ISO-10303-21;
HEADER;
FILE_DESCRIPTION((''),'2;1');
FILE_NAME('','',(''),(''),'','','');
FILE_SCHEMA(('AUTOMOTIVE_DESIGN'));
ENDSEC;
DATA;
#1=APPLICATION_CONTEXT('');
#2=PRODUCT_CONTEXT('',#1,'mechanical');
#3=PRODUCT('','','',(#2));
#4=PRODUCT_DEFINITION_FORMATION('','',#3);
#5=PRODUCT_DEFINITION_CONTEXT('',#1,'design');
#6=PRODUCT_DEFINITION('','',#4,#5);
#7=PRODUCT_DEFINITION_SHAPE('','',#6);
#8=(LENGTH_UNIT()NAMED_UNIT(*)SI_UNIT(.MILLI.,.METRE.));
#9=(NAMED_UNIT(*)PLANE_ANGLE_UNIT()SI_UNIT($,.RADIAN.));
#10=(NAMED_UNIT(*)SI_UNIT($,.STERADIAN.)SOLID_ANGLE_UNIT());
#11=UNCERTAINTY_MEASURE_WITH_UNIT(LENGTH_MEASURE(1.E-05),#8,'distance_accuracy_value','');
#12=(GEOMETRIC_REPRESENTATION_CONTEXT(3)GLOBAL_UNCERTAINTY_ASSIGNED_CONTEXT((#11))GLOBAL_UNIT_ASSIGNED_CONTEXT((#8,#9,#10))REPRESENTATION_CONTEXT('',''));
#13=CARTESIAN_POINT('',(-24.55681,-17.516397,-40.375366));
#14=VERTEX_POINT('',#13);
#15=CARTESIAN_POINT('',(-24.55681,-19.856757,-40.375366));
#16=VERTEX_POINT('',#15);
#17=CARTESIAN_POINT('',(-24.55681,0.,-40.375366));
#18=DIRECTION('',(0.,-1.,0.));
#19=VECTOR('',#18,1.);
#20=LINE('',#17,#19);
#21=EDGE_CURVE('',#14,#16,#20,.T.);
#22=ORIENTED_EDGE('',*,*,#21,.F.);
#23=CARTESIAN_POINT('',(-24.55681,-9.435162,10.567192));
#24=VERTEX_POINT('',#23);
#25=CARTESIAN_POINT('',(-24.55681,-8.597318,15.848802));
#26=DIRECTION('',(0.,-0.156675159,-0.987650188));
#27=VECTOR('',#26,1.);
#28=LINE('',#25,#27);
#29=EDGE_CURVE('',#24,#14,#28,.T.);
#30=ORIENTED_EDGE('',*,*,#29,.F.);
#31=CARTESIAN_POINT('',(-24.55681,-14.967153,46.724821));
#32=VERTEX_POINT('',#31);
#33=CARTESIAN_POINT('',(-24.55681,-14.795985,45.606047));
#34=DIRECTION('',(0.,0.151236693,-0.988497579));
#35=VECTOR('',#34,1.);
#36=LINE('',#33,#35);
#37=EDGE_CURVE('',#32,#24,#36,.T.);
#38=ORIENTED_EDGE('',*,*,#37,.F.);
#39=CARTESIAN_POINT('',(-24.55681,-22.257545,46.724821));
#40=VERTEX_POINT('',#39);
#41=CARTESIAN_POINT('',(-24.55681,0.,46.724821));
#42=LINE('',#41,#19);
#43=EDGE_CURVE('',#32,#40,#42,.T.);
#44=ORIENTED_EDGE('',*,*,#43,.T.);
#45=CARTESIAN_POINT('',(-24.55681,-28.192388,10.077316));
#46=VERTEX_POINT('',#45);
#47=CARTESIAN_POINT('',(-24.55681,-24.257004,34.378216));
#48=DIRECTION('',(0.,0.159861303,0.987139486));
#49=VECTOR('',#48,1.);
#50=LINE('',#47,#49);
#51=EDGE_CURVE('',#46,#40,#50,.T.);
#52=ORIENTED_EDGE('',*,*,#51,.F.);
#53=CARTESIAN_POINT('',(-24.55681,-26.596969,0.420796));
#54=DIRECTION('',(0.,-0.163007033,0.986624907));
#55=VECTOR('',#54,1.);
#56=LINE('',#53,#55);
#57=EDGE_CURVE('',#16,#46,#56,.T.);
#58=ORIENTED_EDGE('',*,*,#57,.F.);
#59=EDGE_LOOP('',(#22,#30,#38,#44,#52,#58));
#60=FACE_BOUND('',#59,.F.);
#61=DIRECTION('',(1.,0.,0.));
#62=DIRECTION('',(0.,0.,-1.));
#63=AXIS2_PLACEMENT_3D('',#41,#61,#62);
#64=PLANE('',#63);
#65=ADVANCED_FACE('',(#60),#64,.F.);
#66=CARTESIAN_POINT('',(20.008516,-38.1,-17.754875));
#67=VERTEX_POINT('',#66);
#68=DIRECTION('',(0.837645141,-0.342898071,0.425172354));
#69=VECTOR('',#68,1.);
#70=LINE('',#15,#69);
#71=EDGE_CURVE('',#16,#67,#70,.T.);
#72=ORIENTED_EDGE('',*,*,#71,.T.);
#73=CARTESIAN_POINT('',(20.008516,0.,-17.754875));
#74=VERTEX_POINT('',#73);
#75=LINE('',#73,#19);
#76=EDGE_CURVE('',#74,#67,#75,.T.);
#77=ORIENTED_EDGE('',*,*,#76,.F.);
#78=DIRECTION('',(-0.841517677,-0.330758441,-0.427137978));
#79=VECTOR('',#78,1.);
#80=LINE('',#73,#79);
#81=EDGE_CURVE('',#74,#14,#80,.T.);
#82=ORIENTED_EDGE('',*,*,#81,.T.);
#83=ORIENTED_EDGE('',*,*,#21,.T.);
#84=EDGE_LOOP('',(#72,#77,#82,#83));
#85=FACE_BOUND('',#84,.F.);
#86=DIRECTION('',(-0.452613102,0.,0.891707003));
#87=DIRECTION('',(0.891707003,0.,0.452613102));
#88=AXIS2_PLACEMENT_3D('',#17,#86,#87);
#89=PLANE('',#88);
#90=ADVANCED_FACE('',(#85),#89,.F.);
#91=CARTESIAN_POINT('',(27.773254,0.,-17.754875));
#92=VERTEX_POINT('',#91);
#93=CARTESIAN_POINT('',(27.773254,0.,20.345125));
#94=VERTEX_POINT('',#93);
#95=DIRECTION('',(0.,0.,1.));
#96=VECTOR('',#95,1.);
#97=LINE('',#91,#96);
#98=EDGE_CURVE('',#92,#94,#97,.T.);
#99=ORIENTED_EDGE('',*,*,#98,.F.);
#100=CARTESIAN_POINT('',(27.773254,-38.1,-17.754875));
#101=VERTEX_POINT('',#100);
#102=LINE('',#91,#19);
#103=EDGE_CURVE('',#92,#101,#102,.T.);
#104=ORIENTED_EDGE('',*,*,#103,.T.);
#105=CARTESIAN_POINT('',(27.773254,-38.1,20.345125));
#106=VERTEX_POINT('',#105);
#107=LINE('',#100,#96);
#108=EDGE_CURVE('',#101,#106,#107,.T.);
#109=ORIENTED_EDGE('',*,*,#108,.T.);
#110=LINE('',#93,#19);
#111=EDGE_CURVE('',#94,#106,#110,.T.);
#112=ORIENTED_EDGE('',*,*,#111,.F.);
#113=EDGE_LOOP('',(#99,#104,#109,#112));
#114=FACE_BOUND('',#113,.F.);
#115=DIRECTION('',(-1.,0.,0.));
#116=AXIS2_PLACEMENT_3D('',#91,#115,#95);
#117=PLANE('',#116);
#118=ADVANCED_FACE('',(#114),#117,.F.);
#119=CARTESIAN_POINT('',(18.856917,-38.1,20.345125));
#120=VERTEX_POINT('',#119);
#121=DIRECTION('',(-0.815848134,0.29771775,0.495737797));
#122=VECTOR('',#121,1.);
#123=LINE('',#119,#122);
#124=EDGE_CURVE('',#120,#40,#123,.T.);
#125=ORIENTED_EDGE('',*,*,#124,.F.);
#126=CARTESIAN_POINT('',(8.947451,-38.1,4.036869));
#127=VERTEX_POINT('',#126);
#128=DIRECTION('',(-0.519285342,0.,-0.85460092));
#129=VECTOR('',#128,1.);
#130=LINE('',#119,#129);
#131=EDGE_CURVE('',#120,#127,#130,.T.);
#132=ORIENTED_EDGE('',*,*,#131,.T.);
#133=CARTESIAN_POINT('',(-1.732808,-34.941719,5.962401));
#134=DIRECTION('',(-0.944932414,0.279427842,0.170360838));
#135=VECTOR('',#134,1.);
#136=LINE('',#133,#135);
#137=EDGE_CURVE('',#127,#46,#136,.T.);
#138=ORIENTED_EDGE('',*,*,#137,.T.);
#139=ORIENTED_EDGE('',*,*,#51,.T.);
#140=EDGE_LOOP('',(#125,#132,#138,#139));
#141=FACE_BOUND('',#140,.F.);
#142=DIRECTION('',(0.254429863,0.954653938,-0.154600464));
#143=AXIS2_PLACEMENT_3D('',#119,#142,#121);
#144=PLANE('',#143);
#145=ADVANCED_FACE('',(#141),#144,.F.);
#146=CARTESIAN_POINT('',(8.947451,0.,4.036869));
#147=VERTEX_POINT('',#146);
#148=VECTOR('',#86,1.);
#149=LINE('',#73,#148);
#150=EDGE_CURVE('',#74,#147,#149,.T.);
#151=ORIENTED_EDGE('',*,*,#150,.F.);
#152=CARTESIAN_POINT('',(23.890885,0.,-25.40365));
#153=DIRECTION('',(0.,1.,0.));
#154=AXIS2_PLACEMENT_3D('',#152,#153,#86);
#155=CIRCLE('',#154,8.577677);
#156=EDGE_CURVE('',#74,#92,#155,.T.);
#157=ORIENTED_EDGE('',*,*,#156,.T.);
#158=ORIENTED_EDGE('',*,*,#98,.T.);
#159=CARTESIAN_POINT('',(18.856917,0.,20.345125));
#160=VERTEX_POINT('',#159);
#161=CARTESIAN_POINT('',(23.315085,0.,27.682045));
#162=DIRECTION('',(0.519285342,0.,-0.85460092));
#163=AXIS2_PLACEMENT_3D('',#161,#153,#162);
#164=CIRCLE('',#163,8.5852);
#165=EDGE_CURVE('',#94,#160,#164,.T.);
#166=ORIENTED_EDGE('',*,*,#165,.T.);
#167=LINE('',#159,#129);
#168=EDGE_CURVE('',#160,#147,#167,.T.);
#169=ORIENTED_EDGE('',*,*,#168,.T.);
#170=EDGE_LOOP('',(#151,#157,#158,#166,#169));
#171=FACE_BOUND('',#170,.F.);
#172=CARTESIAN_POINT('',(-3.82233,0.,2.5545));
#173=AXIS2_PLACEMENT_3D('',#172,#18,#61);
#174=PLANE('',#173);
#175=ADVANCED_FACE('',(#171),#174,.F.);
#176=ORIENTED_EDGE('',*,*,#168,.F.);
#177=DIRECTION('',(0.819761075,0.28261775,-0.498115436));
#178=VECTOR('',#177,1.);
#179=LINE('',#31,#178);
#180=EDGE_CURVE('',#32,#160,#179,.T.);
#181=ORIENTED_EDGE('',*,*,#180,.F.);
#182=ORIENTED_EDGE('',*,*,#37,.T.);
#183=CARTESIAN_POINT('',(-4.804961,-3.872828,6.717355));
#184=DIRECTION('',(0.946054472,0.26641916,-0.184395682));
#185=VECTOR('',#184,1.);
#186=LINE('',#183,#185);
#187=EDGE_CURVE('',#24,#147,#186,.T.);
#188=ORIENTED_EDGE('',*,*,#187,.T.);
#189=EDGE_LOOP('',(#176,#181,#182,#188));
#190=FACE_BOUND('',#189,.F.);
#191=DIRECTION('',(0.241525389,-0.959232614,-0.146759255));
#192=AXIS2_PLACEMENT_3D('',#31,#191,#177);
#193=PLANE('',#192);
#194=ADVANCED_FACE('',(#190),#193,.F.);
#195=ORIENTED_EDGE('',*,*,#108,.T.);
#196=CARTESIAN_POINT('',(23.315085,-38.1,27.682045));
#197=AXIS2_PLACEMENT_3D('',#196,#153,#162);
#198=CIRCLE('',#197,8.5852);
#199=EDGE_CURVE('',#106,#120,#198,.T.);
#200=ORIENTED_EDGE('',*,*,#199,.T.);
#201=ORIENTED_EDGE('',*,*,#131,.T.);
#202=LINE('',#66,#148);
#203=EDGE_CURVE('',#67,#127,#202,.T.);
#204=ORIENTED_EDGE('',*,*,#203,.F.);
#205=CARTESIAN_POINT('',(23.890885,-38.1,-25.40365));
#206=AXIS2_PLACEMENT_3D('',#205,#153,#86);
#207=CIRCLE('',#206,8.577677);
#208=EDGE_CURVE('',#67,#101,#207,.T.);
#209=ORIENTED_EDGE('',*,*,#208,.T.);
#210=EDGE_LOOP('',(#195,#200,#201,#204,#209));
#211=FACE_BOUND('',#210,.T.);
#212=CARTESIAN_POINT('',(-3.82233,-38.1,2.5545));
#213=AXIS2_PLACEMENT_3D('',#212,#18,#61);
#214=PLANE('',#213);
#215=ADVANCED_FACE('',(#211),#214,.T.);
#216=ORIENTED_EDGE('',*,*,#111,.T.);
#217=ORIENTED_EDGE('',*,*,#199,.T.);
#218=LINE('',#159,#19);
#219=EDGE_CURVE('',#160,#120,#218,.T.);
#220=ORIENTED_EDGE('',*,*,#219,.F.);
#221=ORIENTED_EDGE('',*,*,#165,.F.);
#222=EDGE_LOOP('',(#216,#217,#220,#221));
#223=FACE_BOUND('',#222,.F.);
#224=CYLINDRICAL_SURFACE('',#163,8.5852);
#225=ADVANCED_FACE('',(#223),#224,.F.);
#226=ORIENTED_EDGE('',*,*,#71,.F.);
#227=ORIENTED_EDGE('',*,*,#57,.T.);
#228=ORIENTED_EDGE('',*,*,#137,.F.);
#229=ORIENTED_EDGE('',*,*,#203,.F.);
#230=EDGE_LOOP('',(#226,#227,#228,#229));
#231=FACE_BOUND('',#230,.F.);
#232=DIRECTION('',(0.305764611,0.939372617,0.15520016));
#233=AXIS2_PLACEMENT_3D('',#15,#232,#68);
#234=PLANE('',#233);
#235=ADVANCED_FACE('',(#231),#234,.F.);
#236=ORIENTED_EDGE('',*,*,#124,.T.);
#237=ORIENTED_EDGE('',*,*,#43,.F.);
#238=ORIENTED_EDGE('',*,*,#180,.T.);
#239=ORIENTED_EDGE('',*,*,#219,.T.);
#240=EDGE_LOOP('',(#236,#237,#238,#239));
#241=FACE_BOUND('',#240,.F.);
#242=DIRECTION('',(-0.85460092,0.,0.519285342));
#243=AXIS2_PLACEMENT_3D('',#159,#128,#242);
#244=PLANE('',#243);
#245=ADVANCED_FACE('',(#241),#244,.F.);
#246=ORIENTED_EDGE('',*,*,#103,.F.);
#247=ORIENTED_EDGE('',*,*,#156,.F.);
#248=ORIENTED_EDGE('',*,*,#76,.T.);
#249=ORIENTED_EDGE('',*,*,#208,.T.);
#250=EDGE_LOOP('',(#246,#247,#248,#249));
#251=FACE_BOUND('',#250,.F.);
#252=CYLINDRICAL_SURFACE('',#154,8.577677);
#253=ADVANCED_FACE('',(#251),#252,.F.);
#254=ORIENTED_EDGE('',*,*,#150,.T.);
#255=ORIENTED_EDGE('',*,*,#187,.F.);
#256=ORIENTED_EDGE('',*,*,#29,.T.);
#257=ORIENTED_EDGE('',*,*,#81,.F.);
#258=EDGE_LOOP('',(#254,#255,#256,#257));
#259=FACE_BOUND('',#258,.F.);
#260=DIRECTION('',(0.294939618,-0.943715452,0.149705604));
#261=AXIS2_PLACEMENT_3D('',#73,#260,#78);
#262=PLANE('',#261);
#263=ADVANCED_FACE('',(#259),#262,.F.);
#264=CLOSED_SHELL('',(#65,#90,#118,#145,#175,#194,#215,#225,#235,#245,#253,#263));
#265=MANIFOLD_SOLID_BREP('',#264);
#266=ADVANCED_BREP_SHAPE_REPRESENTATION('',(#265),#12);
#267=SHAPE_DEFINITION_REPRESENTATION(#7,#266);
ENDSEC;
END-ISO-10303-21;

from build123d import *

# Parameters (mm, degrees)
F1_DEPTH = 38.1
F3_DEPTH = 101.6
F5_DEPTH = 127


with BuildPart() as f1:
    # F0 (on Front) → F1 (new body)
    with BuildSketch(Plane.XZ):
        with BuildLine():
            Line((27.7732536197, -17.7548748881), (27.7732536197, 20.3451251119))
            ThreePointArc((27.7732536197, 20.3451251119), (23.3150850981, 19.0968449339), (18.8569165766, 20.3451251119))
            Line((18.8569165766, 20.3451251119), (-24.5568101805, 46.7248205056))
            Line((-24.5568101805, 46.7248205056), (-24.5568101805, -40.3753659966))
            Line((-24.5568101805, -40.3753659966), (20.0085155666, -17.7548748881))
            ThreePointArc((20.0085155666, -17.7548748881), (23.8908845931, -16.8259725337), (27.7732536197, -17.7548748881))
        make_face()
    extrude(amount=F1_DEPTH)

    # F2 (on face) → F3 (cut)
    with BuildSketch(Plane(origin=(11.2647537366, 0, -22.1930380433), x_dir=(0.8917070033, 0, 0.4526131022), z_dir=(0.4526131022, 0, -0.8917070033))):
        Polygon((-40.1718992738, 0), (9.8056444527, 0), (-40.1718992738, 17.5163969398), align=None)
        Polygon((-40.1718992738, 19.8567565531), (9.8056444527, 38.1), (-40.1718992738, 38.1), align=None)
    extrude(amount=-F3_DEPTH, mode=Mode.SUBTRACT)

    # F4 (on face) → F5 (cut)
    with BuildSketch(Plane(origin=(14.113699436, 0, 23.2272693714), x_dir=(0.8546009204, 0, -0.5192853424), z_dir=(0.5192853424, 0, 0.8546009204))):
        Polygon((-25.222287783, -38.1), (5.5502130028, -38.1), (-45.2497869972, -22.2575453606), (-45.2497869972, -34.247172677), align=None)
        Polygon((-45.2497869972, -14.9671534034), (5.5502130028, 0), (-25.222287783, 0), (-45.2497869972, -3.6993231454), align=None)
    extrude(amount=-F5_DEPTH, mode=Mode.SUBTRACT)


solid = f1.part
